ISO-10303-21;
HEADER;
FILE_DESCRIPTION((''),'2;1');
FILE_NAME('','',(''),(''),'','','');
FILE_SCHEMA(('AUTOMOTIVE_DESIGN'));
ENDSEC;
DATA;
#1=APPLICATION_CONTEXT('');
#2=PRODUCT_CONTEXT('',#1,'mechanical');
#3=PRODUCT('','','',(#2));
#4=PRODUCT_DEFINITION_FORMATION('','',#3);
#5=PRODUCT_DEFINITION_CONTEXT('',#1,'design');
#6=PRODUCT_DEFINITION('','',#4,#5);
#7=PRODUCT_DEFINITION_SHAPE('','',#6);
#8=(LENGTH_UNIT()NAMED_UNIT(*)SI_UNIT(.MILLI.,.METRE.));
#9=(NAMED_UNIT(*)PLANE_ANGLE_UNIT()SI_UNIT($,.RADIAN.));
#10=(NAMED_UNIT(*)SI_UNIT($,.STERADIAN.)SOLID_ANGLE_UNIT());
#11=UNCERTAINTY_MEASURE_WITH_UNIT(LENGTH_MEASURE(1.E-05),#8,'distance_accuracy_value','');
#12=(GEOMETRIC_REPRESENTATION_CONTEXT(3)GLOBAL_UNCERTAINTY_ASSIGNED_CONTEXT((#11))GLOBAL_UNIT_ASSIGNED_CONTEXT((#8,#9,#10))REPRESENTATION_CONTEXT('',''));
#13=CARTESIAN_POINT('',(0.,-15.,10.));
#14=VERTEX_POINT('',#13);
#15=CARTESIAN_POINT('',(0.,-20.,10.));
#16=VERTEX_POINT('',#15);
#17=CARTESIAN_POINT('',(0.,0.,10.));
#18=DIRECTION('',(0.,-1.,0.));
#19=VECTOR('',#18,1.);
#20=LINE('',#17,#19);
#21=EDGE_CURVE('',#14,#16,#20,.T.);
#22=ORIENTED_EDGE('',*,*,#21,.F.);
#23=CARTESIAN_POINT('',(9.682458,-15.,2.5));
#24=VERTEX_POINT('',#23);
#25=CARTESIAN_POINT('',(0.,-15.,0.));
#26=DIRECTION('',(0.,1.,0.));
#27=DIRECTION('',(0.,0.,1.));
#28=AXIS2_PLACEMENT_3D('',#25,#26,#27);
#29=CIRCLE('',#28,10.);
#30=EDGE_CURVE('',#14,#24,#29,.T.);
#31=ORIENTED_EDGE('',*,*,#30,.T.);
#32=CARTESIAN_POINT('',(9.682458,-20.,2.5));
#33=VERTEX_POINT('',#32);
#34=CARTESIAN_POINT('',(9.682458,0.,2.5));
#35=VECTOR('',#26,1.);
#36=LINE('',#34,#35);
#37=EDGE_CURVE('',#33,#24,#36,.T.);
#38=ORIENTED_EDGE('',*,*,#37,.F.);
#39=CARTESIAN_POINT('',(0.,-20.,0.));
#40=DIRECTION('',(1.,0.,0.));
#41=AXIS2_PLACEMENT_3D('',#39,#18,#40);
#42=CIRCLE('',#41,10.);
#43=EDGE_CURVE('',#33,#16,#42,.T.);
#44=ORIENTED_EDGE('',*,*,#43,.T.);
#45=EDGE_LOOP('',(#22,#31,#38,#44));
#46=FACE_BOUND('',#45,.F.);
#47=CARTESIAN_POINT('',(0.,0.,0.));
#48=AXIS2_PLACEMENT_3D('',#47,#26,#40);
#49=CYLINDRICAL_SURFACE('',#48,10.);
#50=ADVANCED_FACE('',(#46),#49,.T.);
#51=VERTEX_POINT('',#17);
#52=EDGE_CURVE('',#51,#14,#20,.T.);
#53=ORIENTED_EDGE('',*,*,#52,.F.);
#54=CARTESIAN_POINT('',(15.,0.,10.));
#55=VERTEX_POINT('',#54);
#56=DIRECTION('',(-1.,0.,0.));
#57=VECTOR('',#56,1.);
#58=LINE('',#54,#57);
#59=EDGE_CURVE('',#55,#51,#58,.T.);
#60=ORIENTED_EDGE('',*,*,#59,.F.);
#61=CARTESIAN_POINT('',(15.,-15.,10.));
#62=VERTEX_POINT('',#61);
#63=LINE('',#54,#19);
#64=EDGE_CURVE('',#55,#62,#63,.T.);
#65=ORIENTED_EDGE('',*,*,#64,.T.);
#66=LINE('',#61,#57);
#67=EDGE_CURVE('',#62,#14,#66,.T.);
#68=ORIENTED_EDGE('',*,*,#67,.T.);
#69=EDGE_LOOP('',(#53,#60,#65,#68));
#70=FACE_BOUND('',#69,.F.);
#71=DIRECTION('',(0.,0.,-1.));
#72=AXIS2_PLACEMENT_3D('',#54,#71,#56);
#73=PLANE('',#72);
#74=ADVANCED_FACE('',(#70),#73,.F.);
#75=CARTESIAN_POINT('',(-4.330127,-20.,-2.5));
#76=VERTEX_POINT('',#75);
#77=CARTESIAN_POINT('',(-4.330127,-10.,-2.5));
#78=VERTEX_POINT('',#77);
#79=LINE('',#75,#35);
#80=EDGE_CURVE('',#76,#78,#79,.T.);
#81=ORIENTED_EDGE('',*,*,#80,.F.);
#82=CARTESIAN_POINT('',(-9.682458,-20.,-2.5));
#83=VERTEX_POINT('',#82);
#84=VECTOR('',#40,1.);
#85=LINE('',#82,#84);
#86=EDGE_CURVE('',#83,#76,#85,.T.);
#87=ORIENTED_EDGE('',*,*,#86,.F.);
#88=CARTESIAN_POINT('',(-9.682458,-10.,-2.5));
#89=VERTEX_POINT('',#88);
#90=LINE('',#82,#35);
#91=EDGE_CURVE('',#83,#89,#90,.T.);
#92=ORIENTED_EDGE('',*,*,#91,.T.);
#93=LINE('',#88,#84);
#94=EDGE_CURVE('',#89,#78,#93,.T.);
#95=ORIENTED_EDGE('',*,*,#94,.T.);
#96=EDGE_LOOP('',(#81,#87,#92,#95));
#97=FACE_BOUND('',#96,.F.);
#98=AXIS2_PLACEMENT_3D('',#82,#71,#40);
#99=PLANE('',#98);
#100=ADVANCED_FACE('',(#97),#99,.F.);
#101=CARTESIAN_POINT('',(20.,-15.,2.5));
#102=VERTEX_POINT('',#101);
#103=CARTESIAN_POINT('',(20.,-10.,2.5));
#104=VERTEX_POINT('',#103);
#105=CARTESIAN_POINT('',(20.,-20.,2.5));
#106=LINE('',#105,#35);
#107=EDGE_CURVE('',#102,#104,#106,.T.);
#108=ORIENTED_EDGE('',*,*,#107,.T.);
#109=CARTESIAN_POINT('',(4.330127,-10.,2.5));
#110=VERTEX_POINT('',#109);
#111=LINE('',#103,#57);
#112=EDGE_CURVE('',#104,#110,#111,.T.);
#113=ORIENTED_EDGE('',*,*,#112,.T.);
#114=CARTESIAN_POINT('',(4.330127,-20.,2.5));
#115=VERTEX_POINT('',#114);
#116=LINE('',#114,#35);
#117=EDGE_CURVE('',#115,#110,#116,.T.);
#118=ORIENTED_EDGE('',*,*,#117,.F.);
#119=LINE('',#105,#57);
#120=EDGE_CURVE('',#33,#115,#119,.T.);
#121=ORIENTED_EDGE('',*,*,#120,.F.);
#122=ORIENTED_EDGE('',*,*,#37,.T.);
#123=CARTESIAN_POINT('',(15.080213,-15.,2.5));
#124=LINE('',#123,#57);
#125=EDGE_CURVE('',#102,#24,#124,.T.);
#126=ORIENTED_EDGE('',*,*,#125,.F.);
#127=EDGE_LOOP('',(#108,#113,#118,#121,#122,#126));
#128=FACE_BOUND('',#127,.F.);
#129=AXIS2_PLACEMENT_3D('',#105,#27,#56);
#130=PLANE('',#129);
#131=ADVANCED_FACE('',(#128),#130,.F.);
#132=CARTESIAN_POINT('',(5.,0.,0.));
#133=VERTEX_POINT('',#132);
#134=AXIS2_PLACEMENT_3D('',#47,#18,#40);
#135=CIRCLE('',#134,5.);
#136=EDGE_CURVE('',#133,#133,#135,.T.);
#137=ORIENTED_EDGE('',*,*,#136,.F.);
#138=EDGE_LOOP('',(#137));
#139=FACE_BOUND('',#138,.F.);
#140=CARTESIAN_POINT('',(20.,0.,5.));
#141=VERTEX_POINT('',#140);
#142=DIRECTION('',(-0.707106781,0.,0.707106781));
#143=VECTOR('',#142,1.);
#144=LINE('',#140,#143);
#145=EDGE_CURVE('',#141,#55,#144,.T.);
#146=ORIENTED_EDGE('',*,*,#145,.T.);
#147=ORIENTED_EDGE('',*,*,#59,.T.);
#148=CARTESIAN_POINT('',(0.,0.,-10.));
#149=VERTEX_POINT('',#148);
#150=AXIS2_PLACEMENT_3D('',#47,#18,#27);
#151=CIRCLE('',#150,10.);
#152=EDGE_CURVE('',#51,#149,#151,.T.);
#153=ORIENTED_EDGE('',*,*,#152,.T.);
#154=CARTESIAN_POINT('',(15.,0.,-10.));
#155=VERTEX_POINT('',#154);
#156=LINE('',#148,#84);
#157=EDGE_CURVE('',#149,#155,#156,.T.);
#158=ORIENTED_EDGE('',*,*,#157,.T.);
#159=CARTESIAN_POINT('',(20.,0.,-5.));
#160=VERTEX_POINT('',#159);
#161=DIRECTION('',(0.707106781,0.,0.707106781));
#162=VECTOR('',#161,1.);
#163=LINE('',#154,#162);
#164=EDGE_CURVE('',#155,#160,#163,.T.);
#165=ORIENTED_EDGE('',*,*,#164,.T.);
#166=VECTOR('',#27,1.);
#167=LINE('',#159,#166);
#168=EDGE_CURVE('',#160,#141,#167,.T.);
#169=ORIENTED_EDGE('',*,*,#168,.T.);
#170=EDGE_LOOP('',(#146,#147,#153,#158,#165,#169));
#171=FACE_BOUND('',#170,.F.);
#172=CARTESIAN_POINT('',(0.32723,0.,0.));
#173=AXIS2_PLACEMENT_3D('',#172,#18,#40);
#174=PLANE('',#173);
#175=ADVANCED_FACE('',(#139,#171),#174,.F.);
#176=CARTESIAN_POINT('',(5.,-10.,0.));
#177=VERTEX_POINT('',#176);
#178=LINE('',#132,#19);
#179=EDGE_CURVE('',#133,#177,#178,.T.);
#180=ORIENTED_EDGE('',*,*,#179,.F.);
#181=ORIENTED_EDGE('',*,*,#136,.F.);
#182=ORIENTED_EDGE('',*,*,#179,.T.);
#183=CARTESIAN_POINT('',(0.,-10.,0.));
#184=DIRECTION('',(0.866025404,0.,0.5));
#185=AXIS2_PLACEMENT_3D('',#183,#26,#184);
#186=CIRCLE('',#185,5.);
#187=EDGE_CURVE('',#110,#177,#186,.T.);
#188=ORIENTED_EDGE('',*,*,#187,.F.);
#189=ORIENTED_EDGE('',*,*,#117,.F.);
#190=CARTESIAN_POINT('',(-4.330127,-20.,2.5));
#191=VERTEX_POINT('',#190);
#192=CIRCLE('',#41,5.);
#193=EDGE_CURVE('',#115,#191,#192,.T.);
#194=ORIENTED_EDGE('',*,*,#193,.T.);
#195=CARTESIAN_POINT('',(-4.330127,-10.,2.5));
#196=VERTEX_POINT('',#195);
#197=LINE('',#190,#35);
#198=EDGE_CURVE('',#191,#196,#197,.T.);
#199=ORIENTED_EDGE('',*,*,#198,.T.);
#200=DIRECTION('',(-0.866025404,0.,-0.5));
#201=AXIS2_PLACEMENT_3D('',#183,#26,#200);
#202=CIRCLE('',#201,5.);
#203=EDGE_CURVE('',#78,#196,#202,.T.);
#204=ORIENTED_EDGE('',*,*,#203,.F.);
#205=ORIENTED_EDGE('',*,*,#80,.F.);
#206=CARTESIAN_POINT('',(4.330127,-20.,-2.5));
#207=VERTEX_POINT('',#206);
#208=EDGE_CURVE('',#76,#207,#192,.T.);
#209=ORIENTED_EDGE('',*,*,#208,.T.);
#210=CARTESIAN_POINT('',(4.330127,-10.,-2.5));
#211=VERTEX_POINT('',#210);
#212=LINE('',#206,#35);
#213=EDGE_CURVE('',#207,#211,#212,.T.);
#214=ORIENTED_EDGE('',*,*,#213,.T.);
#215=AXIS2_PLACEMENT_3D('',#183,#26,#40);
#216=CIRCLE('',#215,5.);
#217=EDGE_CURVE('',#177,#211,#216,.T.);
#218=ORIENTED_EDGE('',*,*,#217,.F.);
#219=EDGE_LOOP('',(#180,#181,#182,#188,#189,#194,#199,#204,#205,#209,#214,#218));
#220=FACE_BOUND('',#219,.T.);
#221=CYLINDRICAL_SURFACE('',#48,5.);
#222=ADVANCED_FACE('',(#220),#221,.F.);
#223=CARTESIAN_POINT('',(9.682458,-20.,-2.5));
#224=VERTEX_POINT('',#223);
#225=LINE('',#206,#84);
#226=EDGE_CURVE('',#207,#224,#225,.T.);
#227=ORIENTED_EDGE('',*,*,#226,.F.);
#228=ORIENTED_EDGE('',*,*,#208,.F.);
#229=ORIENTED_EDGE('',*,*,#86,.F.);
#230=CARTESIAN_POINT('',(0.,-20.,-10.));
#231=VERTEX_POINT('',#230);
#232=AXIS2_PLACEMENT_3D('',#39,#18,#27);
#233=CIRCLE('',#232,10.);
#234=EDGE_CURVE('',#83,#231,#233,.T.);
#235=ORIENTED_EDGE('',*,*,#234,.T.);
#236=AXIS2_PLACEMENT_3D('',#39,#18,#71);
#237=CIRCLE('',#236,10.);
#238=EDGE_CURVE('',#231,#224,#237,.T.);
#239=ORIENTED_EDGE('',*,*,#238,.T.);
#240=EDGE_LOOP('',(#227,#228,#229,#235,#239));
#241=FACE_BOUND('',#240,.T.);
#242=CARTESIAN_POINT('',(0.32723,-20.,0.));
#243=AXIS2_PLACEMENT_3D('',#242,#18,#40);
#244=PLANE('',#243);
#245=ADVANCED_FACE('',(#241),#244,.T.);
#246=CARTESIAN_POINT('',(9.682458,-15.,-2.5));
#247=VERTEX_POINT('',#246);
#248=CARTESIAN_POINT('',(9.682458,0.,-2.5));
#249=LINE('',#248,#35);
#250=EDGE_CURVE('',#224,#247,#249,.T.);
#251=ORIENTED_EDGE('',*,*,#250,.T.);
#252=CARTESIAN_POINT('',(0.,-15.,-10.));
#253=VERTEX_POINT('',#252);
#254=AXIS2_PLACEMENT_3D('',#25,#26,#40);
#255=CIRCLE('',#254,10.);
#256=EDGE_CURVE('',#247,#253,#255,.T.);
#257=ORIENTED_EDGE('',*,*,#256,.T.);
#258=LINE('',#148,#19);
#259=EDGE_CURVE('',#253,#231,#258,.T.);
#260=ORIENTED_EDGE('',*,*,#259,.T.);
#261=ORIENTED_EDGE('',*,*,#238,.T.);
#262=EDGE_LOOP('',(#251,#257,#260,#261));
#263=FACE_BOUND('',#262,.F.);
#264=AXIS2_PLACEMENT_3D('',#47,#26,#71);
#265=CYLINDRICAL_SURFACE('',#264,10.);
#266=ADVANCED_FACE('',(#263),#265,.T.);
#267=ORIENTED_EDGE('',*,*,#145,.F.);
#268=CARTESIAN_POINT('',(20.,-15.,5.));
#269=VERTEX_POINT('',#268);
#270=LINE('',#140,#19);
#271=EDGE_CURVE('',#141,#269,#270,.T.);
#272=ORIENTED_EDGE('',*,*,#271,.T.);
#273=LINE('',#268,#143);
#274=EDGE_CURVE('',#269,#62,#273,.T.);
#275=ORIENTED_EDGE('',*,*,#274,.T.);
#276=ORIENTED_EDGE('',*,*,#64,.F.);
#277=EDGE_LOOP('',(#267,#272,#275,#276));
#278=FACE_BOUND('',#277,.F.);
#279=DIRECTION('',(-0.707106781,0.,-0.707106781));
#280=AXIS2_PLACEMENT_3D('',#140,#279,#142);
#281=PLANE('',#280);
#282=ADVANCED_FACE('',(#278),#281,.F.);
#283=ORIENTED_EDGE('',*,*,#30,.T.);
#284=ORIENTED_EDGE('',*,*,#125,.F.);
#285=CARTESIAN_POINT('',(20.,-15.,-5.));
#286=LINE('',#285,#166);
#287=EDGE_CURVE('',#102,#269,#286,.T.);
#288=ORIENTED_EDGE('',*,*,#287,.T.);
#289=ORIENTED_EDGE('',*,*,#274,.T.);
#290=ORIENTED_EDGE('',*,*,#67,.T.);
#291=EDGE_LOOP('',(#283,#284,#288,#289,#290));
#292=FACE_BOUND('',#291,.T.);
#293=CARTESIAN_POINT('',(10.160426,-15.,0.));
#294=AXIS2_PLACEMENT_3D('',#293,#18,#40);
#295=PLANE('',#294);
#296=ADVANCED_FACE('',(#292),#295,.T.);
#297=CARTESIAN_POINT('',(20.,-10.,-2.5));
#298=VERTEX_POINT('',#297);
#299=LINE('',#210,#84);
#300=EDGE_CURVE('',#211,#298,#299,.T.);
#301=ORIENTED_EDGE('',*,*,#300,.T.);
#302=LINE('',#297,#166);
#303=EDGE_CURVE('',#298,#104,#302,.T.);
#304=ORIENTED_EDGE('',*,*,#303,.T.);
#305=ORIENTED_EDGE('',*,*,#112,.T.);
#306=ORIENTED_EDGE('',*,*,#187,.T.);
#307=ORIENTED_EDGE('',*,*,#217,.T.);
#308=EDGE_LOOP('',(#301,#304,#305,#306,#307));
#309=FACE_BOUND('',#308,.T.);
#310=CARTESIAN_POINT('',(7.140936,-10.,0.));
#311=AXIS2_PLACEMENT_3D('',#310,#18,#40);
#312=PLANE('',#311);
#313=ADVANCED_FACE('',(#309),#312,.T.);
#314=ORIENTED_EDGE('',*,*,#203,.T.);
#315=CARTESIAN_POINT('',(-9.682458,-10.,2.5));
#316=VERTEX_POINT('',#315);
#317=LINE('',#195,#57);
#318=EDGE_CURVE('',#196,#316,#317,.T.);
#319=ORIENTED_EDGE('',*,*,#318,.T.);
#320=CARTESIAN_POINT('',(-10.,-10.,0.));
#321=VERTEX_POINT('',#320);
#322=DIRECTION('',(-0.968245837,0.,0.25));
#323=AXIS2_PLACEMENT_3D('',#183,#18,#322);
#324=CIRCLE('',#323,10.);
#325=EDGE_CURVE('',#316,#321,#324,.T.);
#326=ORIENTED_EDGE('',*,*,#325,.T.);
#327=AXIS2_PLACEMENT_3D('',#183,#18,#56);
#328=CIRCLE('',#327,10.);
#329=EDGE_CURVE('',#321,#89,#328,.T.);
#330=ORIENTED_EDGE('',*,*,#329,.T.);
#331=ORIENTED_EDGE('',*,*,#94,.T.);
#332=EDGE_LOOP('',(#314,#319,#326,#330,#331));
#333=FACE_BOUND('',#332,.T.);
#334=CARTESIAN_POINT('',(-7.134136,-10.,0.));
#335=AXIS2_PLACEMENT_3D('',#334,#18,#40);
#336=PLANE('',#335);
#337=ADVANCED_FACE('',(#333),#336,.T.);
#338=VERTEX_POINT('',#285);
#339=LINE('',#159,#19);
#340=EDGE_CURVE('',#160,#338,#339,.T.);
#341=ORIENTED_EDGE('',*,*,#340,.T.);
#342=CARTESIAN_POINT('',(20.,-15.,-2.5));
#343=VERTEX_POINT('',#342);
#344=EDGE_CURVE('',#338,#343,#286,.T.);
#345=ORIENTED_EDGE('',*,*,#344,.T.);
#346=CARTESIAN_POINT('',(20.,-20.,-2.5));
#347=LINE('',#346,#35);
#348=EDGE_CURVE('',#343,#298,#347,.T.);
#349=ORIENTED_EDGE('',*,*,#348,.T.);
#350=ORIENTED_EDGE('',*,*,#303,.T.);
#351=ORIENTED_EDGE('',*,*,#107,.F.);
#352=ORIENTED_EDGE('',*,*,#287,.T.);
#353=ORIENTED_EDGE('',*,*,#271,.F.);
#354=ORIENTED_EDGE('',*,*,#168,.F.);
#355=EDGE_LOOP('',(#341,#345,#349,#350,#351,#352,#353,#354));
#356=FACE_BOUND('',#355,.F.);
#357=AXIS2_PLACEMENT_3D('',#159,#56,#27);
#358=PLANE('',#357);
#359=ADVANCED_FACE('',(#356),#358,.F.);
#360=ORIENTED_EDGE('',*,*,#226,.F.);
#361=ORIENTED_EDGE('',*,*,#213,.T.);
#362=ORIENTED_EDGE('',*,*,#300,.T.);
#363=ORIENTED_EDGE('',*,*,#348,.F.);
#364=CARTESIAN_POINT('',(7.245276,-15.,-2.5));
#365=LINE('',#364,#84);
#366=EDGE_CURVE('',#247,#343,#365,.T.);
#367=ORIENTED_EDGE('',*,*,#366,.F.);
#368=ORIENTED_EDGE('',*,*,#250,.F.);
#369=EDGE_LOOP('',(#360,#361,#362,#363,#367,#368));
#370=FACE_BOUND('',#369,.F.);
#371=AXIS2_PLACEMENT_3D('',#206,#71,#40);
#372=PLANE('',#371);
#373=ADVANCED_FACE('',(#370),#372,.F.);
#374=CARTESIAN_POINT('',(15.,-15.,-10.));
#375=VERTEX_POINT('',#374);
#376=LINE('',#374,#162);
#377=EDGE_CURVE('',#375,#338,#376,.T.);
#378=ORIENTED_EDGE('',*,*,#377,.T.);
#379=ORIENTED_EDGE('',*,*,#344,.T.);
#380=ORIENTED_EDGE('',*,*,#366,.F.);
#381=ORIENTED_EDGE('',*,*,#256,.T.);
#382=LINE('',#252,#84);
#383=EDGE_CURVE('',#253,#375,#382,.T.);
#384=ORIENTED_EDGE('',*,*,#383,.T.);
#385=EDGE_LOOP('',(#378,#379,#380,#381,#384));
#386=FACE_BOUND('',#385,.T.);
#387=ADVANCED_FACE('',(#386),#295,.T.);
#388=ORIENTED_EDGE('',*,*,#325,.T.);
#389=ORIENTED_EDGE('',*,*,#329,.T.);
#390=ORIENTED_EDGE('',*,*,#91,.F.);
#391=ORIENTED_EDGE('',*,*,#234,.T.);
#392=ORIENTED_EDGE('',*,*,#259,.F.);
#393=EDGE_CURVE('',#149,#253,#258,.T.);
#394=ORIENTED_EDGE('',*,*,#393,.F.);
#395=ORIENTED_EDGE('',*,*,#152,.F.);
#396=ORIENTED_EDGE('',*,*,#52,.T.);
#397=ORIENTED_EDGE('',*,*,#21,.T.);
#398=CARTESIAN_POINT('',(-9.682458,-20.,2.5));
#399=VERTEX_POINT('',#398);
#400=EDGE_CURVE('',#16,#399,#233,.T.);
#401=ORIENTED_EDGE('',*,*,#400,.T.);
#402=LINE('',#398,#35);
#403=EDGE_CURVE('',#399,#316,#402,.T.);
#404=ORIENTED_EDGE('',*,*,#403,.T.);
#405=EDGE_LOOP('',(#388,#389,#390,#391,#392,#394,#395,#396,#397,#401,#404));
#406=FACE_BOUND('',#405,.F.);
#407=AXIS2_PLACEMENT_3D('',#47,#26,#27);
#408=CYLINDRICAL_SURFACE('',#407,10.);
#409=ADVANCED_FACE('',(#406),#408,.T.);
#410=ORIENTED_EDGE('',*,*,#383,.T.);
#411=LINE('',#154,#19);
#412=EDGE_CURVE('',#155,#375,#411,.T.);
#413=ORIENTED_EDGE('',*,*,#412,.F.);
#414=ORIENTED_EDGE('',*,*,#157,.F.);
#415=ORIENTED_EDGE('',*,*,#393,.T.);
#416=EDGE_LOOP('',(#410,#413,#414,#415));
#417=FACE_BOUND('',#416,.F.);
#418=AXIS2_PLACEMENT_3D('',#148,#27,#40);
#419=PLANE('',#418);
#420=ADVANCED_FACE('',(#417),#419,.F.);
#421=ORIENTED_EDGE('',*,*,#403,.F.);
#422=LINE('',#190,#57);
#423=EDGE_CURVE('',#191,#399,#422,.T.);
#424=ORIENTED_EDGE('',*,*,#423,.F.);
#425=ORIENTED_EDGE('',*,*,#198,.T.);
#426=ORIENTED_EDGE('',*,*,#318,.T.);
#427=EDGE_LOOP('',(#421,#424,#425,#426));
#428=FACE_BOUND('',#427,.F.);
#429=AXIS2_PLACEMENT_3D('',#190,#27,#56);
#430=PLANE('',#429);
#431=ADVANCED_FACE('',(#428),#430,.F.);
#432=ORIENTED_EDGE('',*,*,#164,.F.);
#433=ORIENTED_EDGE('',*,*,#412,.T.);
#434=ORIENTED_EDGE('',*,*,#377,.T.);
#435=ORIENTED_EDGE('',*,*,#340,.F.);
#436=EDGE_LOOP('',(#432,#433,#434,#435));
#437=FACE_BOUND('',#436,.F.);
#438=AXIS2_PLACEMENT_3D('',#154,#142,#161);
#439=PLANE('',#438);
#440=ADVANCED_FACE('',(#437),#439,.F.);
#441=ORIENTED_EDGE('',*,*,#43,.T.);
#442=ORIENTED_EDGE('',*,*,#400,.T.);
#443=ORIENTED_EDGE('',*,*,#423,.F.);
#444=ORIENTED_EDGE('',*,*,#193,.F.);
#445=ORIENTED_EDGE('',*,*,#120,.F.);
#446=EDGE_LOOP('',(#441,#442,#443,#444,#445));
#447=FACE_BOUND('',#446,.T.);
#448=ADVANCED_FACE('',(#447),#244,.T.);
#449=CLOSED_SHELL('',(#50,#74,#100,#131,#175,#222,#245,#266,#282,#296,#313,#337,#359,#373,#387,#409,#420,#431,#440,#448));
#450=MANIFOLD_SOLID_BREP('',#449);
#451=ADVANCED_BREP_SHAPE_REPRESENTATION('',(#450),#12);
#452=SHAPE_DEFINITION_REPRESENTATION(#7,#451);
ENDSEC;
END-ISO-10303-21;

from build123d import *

# Parameters (mm, degrees)
F1_DEPTH = 15
F0_R     = 5
F2_DEPTH = 20
F4_DEPTH = 10


with BuildPart() as f1:
    # F0 (on Front) → F1 (new body)
    with BuildSketch(Plane.XZ):
        with BuildLine():
            ThreePointArc((0, 10), (7.0710678119, 7.0710678119), (10, 0))
            ThreePointArc((10, 0), (7.0710678119, -7.0710678119), (0, -10))
            Line((0, -10), (15, -10))
            Line((15, -10), (20, -5))
            Line((20, -5), (20, 5))
            Line((20, 5), (15, 10))
            Line((15, 10), (0, 10))
        make_face()
    extrude(amount=F1_DEPTH)

    # F0 (on Front) → F2 (join)
    with BuildSketch(Plane.XZ):
        with BuildLine():
            ThreePointArc((0, -10), (7.0710678119, -7.0710678119), (10, 0))
            ThreePointArc((10, 0), (7.0710678119, 7.0710678119), (0, 10))
            ThreePointArc((0, 10), (-10, 0), (0, -10))
        make_face()
        Circle(F0_R, mode=Mode.SUBTRACT)
    extrude(amount=F2_DEPTH)

    # F3 (on face) → F4 (cut)
    with BuildSketch(Plane.XZ.offset(20)):
        with BuildLine():
            Line((-4.3301270189, 2.5), (-9.6824583655, 2.5))
            ThreePointArc((-9.6824583655, 2.5), (-9.9202969627, 1.2600429248), (-10, 0))
            ThreePointArc((-10, 0), (-9.9202969627, -1.2600429248), (-9.6824583655, -2.5))
            Line((-9.6824583655, -2.5), (-4.3301270189, -2.5))
            ThreePointArc((-4.3301270189, -2.5), (-5, 0), (-4.3301270189, 2.5))
        make_face()
        with BuildLine():
            ThreePointArc((10, 0), (9.9202969627, 1.2600429248), (9.6824583655, 2.5))
            Line((9.6824583655, 2.5), (4.3301270189, 2.5))
            ThreePointArc((4.3301270189, 2.5), (4.8296291314, 1.2940952255), (5, 0))
            ThreePointArc((5, 0), (4.8296291314, -1.2940952255), (4.3301270189, -2.5))
            Line((4.3301270189, -2.5), (9.6824583655, -2.5))
            ThreePointArc((9.6824583655, -2.5), (9.9202969627, -1.2600429248), (10, 0))
        make_face()
        with BuildLine():
            Line((20, 2.5), (9.6824583655, 2.5))
            ThreePointArc((9.6824583655, 2.5), (9.9202969627, 1.2600429248), (10, 0))
            ThreePointArc((10, 0), (9.9202969627, -1.2600429248), (9.6824583655, -2.5))
            Line((9.6824583655, -2.5), (20, -2.5))
            Line((20, -2.5), (20, 0))
            Line((20, 0), (20, 2.5))
        make_face()
    extrude(amount=-F4_DEPTH, mode=Mode.SUBTRACT)


solid = f1.part
